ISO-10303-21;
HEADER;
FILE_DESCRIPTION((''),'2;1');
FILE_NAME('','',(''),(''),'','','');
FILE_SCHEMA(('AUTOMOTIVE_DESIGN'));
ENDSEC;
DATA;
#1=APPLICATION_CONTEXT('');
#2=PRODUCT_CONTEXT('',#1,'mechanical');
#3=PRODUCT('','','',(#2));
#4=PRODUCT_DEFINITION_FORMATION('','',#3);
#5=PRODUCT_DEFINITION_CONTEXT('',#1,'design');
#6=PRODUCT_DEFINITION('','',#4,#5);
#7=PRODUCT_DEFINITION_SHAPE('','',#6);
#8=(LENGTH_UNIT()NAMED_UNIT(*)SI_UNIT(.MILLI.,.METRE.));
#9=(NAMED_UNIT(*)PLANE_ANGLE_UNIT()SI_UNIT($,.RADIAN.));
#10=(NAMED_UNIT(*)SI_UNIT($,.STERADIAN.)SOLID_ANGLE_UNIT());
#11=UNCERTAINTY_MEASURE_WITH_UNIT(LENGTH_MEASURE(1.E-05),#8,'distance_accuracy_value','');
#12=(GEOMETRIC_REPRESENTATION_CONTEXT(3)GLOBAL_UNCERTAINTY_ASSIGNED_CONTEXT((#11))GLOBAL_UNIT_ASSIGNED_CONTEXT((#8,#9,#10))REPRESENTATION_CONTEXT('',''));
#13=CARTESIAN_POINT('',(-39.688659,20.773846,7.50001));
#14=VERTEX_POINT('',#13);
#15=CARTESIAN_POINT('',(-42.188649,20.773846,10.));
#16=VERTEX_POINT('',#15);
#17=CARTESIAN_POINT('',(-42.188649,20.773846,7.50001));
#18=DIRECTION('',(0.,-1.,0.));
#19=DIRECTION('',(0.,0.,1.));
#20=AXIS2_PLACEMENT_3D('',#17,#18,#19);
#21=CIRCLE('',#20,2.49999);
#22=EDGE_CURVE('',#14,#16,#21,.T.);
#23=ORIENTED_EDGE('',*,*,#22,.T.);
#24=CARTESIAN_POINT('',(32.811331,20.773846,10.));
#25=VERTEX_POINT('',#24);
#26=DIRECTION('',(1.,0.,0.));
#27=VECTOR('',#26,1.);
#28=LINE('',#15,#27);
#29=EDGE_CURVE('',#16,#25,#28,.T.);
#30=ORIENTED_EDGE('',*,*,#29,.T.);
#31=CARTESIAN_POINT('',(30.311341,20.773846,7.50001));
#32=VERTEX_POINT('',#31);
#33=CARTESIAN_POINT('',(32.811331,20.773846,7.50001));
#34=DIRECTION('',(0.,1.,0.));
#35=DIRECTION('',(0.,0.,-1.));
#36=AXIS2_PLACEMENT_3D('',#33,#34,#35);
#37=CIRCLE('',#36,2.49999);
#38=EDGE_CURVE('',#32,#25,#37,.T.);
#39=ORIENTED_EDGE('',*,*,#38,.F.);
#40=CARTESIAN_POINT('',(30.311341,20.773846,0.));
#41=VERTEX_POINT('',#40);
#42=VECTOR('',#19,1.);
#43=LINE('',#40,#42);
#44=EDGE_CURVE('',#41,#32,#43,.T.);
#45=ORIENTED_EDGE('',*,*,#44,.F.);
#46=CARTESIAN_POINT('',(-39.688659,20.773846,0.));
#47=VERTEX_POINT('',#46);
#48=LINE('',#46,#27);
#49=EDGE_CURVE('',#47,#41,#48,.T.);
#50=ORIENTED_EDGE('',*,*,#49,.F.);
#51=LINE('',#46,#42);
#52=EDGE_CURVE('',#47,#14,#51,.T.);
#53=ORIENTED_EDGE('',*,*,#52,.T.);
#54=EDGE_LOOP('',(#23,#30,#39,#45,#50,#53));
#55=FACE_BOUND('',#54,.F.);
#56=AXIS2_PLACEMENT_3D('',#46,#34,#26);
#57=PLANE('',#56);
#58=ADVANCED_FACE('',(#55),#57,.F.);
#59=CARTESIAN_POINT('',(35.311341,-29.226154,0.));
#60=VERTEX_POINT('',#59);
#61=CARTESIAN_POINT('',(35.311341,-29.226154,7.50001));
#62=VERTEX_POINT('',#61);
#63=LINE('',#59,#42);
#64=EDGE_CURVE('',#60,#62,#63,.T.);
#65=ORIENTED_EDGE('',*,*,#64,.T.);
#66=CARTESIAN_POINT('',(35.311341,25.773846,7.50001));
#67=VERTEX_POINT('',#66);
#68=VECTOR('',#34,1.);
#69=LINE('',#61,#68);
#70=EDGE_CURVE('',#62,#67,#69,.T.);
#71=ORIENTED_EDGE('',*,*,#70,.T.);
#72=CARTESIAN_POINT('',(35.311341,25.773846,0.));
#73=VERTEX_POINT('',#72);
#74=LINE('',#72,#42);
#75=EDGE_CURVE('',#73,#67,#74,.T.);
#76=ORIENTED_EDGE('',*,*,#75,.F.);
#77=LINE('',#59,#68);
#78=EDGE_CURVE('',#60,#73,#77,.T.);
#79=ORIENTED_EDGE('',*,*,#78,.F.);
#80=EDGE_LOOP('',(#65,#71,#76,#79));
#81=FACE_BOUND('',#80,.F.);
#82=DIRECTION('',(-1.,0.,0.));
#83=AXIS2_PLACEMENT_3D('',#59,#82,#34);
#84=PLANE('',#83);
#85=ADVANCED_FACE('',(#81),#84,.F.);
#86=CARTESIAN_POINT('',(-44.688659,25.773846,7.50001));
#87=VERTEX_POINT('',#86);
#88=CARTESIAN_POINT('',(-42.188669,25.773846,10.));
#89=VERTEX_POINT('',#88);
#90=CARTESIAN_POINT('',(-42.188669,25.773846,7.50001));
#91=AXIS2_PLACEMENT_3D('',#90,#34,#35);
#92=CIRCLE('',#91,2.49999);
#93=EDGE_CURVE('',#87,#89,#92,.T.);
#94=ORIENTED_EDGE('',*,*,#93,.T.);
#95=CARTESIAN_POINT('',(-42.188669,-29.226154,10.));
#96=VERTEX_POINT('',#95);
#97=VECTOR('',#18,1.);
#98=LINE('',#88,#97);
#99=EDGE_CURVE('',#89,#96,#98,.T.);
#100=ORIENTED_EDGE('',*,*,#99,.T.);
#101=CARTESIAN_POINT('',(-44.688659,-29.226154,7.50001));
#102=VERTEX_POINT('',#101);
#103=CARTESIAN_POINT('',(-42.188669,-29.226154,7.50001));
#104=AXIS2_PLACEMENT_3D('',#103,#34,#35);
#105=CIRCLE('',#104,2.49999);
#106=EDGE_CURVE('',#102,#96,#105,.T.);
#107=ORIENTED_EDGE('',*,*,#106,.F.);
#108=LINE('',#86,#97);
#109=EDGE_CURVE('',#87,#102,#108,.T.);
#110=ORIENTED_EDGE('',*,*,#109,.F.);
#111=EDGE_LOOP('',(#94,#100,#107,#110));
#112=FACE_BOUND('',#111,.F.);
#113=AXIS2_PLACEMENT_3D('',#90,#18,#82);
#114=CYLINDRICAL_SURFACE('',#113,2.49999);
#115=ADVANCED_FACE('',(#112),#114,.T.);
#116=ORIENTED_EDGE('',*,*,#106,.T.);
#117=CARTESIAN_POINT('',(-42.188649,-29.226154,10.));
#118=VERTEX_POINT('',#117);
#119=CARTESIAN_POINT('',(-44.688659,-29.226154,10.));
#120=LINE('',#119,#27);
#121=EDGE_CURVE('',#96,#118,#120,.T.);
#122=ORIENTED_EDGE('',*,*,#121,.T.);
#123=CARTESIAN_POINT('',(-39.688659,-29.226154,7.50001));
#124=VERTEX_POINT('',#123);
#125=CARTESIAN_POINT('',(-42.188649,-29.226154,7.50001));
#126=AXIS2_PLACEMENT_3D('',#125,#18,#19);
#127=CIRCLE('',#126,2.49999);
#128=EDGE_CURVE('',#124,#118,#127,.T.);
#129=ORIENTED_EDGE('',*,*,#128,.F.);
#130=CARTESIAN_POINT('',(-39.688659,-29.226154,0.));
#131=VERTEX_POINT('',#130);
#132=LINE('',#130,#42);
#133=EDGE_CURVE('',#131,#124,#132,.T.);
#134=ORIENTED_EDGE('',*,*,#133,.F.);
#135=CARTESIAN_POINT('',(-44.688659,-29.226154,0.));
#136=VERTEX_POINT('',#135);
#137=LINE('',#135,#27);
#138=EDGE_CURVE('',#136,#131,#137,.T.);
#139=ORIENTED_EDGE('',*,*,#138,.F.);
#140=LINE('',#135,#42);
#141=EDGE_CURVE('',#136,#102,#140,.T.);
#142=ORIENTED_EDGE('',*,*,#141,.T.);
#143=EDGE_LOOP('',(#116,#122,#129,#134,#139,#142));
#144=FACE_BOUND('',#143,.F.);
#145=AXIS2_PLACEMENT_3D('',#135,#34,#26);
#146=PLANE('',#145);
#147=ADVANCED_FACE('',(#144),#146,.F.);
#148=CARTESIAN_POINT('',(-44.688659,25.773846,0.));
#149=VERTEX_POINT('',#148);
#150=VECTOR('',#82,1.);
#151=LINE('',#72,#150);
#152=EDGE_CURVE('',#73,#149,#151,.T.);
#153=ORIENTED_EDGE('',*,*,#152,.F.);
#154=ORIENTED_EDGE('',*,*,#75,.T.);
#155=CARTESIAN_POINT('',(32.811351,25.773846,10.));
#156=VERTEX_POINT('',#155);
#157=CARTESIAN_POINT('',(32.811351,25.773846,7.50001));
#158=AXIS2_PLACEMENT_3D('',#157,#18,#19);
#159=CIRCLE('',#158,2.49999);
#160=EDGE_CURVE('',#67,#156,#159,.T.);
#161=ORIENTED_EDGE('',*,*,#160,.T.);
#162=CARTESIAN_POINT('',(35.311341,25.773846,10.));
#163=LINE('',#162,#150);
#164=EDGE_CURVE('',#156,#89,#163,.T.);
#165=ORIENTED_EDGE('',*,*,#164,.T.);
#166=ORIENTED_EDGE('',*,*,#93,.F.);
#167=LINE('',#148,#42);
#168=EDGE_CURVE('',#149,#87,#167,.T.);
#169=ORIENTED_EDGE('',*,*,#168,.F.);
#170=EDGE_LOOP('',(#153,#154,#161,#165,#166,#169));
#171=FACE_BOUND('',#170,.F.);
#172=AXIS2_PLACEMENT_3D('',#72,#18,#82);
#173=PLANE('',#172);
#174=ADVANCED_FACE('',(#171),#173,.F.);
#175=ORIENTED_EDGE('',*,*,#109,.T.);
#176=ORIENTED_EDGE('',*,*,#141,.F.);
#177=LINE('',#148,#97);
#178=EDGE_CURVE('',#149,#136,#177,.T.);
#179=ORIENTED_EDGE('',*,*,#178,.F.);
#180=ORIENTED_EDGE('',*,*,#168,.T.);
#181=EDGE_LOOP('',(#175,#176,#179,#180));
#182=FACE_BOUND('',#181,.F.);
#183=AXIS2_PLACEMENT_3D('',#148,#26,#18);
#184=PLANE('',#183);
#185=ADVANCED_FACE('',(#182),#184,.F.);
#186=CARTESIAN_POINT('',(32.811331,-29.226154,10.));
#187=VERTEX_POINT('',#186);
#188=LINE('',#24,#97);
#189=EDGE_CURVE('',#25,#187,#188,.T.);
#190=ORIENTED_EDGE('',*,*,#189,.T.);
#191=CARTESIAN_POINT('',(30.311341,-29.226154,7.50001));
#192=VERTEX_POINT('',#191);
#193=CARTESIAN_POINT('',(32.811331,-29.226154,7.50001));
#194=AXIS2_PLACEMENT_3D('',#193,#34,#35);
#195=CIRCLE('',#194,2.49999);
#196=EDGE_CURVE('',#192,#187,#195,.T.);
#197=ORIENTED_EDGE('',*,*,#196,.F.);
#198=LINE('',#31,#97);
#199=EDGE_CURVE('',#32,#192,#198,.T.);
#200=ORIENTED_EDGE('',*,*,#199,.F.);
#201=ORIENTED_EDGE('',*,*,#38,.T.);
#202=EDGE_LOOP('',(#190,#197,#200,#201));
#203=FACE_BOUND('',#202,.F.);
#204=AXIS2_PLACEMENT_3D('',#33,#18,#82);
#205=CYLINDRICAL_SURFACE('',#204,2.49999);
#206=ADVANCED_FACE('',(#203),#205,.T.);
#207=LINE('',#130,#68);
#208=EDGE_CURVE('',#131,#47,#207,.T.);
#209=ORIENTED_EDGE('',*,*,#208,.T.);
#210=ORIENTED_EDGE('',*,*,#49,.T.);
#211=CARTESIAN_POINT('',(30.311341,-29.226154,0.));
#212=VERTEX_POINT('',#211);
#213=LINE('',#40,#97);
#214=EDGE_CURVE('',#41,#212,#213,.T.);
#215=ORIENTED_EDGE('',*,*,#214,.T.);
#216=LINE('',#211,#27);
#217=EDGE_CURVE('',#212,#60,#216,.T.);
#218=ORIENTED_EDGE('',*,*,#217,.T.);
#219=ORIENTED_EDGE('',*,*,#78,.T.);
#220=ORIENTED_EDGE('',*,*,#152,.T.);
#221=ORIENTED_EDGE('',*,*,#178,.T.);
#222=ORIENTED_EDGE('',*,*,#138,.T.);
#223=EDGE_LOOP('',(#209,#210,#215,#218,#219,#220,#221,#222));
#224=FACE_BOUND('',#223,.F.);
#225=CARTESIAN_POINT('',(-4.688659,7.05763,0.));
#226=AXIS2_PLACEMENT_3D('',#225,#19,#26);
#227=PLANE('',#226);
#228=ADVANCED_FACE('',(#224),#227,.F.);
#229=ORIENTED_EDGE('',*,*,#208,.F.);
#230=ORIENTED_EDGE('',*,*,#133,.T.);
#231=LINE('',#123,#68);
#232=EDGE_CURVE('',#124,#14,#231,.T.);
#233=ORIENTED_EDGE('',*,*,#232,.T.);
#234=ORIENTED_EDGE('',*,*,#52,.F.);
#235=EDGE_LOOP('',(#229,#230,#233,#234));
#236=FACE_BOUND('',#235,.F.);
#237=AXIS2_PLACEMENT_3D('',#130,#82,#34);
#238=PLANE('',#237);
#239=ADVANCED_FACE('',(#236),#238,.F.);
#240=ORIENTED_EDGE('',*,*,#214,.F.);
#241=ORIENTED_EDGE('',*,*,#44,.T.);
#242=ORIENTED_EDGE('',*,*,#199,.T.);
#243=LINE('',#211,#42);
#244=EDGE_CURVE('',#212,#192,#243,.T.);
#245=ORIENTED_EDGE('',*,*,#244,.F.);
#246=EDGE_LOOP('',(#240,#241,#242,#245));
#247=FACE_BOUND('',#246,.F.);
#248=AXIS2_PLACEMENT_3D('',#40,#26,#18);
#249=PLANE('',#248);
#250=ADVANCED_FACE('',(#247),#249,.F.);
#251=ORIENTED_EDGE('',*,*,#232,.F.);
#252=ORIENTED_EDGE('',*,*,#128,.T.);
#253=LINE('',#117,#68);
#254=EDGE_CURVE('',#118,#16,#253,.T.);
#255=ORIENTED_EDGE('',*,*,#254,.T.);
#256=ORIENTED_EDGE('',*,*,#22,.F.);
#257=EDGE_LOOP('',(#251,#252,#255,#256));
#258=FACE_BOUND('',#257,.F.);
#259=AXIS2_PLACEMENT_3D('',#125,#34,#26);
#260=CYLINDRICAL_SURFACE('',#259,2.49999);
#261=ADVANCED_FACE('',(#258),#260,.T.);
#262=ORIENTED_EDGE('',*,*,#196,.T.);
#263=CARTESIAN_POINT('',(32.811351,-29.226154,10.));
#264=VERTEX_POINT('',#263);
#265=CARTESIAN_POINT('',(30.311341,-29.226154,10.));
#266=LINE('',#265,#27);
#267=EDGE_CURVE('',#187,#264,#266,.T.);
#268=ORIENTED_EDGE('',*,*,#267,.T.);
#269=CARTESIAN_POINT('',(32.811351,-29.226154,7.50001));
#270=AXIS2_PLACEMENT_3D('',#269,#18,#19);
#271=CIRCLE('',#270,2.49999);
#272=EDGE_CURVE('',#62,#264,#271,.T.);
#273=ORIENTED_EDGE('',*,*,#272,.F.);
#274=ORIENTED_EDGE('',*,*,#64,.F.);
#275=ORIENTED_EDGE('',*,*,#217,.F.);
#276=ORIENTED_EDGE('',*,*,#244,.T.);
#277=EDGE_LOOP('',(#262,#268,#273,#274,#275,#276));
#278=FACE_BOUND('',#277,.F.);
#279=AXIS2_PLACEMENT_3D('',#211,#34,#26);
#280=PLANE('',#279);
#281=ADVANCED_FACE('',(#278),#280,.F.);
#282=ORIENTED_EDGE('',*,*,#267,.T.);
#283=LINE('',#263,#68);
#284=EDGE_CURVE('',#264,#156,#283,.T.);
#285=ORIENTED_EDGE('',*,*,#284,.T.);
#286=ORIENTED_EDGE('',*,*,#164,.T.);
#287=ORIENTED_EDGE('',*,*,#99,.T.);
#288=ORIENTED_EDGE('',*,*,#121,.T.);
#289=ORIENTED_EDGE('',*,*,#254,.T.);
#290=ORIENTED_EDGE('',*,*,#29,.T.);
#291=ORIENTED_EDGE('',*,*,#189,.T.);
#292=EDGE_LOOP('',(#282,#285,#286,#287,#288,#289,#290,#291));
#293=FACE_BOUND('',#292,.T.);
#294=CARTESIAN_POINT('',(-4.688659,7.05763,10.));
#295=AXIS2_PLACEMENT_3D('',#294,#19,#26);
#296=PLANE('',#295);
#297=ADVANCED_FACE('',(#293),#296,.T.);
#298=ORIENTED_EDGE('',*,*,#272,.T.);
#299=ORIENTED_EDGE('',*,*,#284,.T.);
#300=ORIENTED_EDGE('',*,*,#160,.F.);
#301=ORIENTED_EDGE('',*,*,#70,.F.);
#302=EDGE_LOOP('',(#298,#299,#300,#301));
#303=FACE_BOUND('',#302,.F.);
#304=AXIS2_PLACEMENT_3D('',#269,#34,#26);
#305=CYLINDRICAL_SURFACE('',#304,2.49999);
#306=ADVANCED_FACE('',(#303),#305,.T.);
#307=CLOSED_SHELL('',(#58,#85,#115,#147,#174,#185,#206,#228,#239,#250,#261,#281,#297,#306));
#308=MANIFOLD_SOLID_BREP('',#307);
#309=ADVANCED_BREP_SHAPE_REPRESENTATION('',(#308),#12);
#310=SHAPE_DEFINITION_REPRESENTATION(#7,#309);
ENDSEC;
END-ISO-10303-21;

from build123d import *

# Parameters (mm, degrees)
F1_DEPTH = 10
F2_R     = 2.49999


# Not quite as in the source:
# - a fillet or chamfer is up to 0.001 mm smaller than in the source, because OpenCascade refuses the exact size


with BuildPart() as f1:
    # F0 (on Top) → F1 (new body)
    with BuildSketch(Plane.XY):
        Polygon((-44.6886586582, 25.7738458982), (-44.6886586582, -29.2261541018), (-39.6886586582, -29.2261541018), (-39.6886586582, 20.7738458982), (30.3113413418, 20.7738458982), (30.3113413418, -29.2261541018), (35.3113413418, -29.2261541018), (35.3113413418, 25.7738458982), align=None)
    extrude(amount=F1_DEPTH)

    # F2 (radius 2.5 in the source; OpenCascade refuses exactly that, so slightly less here)
    f2_edges = [f1.edges().sort_by_distance(p)[0] for p in [
        (-44.688659, -1.726154, 10),
        (-39.688659, -4.226154, 10),
        (30.311341, -4.226154, 10),
        (35.311341, -1.726154, 10),
    ]]
    fillet(f2_edges, radius=F2_R)


solid = f1.part
